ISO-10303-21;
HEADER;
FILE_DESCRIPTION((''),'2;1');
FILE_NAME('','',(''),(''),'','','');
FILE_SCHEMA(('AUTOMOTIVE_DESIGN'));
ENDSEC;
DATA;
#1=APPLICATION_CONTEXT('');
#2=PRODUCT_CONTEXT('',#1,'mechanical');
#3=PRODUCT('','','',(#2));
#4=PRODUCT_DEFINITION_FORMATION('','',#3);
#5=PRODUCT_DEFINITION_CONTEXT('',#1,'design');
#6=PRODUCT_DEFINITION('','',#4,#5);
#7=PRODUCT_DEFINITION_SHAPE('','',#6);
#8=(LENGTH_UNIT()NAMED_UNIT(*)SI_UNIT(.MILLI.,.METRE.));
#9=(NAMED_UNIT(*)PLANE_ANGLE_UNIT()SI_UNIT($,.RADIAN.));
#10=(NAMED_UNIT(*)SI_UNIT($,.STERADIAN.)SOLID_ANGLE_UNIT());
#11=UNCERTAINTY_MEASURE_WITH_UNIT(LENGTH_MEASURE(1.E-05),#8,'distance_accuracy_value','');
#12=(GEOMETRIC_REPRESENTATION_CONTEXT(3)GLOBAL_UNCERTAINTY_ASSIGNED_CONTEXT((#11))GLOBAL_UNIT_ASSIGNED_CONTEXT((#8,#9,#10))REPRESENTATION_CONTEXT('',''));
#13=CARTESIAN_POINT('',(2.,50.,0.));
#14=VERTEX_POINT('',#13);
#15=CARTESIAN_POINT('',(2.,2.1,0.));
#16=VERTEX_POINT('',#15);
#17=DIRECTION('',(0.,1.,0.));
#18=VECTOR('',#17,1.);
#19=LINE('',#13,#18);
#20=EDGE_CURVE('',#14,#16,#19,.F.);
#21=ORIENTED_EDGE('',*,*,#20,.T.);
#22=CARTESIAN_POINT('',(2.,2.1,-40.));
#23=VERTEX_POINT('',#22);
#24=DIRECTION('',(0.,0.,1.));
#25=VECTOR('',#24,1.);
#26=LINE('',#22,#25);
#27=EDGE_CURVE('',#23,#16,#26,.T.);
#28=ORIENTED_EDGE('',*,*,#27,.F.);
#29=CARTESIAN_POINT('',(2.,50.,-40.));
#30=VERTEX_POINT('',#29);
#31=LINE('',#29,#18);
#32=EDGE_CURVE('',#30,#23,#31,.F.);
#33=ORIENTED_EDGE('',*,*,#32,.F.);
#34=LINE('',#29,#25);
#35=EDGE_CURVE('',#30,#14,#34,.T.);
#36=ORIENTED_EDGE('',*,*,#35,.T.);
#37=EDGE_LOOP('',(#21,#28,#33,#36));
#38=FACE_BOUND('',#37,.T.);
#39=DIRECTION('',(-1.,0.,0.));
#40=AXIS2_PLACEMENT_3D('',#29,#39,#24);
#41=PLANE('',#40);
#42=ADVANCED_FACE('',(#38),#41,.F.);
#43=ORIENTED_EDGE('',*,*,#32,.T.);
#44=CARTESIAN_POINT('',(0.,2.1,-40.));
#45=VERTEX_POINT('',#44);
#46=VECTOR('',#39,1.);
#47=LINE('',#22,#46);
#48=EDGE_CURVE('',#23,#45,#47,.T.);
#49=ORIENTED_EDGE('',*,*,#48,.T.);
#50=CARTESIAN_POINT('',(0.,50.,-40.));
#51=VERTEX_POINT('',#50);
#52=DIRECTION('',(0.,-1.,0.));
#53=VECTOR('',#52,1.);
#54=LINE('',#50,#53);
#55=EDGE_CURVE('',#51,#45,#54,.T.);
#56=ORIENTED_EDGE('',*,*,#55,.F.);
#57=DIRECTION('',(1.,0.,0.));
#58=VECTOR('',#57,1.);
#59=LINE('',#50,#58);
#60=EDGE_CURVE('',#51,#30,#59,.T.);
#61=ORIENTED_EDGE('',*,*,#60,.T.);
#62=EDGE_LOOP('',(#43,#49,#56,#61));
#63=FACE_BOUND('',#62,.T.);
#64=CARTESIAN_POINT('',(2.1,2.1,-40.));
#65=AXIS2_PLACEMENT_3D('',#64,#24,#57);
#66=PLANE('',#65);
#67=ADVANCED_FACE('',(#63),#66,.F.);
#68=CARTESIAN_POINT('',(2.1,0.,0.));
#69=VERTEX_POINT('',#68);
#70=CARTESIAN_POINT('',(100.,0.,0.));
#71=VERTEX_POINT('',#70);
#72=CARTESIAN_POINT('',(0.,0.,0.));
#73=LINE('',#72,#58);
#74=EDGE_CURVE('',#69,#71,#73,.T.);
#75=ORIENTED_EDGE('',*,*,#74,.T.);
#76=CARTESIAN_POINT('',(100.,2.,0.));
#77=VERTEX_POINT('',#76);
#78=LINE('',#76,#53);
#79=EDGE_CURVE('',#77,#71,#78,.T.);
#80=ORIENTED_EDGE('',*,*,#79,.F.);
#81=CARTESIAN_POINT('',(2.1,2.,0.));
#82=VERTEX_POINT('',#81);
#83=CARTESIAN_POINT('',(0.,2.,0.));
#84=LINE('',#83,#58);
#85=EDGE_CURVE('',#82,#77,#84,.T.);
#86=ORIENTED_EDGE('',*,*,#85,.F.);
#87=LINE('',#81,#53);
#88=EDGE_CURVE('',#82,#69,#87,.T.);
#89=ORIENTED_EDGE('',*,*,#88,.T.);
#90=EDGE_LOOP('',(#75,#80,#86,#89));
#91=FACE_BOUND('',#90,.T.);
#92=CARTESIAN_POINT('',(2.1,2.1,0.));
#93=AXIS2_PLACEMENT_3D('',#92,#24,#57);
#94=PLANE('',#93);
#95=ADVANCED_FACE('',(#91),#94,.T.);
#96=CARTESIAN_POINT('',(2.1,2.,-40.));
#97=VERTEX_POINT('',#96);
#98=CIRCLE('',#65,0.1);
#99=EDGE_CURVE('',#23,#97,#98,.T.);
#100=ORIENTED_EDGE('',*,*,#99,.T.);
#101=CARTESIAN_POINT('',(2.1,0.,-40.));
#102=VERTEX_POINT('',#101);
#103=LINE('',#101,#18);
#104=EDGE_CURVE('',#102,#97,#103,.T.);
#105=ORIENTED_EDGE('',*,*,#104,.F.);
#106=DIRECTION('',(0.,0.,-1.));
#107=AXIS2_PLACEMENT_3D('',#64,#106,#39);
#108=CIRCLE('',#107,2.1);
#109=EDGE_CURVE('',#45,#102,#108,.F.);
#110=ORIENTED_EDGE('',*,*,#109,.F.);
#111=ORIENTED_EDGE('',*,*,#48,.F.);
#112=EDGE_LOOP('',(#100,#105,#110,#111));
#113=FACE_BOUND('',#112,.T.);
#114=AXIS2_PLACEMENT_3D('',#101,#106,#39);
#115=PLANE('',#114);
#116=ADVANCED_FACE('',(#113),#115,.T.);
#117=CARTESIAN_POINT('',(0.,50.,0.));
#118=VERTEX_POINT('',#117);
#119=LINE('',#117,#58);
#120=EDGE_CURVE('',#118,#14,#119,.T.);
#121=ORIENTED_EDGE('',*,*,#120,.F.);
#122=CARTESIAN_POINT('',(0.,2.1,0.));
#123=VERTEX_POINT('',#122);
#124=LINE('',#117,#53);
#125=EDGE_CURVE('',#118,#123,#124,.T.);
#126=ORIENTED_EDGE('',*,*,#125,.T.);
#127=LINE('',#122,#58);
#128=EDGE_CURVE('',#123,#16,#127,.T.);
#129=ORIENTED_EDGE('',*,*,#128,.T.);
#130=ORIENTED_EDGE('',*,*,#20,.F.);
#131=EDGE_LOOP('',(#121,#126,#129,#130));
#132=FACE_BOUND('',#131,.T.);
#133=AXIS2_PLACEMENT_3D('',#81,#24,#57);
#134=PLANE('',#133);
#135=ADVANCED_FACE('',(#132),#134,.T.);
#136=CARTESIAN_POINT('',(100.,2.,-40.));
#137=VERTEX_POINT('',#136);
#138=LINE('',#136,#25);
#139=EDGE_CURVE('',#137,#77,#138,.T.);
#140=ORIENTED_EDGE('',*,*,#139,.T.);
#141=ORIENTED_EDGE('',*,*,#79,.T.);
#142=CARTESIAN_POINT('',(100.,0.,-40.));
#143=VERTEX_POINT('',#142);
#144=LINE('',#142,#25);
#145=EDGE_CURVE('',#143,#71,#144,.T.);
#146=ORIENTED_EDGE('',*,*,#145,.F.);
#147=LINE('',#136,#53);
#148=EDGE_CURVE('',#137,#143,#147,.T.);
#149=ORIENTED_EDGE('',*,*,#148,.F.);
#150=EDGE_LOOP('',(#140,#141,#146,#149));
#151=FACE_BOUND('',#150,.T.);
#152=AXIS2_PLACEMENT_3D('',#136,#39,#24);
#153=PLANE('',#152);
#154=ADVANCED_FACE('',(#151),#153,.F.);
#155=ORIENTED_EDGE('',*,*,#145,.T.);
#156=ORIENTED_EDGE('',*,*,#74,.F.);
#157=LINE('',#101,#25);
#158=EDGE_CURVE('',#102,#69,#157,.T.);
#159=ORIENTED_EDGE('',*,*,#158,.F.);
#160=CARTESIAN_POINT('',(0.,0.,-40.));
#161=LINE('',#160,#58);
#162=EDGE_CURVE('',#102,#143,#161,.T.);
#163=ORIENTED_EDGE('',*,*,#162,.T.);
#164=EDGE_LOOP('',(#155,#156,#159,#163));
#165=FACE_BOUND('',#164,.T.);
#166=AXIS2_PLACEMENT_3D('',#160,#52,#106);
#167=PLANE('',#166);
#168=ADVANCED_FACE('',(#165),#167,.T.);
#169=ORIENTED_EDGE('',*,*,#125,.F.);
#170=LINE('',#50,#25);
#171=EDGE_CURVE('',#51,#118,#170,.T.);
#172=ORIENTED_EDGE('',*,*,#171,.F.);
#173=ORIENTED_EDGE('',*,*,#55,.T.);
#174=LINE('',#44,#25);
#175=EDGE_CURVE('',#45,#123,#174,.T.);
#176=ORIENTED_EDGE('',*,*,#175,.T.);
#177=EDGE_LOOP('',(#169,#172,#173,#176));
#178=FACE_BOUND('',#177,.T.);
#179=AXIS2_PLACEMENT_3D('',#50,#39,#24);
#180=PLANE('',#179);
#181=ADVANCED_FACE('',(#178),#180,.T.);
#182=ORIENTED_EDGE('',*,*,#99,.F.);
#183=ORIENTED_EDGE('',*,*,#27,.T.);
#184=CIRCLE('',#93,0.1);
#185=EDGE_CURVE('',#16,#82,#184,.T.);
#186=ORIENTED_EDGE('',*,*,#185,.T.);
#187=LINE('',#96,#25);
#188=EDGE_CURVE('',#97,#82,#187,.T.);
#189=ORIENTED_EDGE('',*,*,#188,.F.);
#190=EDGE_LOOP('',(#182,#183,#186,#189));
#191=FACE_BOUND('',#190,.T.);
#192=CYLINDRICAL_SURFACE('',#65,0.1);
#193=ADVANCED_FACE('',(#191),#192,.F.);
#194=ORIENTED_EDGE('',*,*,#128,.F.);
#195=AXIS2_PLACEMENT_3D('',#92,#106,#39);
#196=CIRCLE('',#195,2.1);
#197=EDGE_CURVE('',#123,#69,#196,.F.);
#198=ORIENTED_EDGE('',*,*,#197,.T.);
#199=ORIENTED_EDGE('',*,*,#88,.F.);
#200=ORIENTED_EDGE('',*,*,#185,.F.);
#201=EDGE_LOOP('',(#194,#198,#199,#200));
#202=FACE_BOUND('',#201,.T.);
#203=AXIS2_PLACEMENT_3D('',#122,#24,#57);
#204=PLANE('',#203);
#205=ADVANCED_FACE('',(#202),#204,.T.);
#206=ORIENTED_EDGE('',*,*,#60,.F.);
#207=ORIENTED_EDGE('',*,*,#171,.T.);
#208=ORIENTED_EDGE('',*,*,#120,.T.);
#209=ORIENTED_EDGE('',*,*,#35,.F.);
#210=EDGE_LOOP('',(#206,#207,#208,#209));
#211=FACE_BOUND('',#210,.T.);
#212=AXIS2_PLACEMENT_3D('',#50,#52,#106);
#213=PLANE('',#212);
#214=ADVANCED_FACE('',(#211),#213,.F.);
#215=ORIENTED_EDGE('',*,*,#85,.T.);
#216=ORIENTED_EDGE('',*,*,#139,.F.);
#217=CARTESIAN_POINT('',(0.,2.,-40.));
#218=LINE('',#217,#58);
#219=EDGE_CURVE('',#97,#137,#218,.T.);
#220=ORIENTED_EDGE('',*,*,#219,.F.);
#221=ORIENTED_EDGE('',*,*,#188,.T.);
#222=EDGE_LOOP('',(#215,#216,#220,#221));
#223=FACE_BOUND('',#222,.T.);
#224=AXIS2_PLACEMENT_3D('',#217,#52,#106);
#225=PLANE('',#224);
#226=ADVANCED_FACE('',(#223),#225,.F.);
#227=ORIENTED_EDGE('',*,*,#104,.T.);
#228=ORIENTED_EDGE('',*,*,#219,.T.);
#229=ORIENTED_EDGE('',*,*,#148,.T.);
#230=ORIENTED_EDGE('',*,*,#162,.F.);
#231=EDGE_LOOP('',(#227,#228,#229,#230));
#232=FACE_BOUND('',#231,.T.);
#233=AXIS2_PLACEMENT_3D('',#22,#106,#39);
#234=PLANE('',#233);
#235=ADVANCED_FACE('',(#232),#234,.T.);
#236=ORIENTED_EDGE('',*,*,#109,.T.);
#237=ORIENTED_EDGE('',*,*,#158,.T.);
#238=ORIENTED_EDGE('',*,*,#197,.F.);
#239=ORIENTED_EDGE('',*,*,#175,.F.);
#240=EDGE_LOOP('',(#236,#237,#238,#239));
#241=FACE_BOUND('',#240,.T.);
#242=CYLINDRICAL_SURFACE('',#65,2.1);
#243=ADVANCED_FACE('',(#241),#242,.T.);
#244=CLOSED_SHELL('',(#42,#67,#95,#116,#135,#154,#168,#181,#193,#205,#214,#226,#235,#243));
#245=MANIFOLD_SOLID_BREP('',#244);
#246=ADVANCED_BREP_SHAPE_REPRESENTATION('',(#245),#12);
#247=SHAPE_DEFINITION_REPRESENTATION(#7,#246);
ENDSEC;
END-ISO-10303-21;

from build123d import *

# Parameters (mm, degrees)
SM_BASE_FLANGE_1_DEPTH = 40


# Sheet-metal steps are written as plain solids
with BuildPart() as part:
    # Sketch 1 → 基体-法兰1 (new body)
    with BuildSketch(Plane.XY):
        with BuildLine():
            Line((0, 50), (0, 2.1))
            ThreePointArc((0, 2.1), (0.61507576, 0.61507576), (2.1, 0))
            Line((2.1, 0), (100, 0))
            Line((100, 0), (100, 2))
            Line((100, 2), (2.1, 2))
            ThreePointArc((2.1, 2), (2.029289322, 2.029289322), (2, 2.1))
            Line((2, 2.1), (2, 50))
            Line((2, 50), (0, 50))
        make_face()
    extrude(amount=-SM_BASE_FLANGE_1_DEPTH)


solid = part.part
